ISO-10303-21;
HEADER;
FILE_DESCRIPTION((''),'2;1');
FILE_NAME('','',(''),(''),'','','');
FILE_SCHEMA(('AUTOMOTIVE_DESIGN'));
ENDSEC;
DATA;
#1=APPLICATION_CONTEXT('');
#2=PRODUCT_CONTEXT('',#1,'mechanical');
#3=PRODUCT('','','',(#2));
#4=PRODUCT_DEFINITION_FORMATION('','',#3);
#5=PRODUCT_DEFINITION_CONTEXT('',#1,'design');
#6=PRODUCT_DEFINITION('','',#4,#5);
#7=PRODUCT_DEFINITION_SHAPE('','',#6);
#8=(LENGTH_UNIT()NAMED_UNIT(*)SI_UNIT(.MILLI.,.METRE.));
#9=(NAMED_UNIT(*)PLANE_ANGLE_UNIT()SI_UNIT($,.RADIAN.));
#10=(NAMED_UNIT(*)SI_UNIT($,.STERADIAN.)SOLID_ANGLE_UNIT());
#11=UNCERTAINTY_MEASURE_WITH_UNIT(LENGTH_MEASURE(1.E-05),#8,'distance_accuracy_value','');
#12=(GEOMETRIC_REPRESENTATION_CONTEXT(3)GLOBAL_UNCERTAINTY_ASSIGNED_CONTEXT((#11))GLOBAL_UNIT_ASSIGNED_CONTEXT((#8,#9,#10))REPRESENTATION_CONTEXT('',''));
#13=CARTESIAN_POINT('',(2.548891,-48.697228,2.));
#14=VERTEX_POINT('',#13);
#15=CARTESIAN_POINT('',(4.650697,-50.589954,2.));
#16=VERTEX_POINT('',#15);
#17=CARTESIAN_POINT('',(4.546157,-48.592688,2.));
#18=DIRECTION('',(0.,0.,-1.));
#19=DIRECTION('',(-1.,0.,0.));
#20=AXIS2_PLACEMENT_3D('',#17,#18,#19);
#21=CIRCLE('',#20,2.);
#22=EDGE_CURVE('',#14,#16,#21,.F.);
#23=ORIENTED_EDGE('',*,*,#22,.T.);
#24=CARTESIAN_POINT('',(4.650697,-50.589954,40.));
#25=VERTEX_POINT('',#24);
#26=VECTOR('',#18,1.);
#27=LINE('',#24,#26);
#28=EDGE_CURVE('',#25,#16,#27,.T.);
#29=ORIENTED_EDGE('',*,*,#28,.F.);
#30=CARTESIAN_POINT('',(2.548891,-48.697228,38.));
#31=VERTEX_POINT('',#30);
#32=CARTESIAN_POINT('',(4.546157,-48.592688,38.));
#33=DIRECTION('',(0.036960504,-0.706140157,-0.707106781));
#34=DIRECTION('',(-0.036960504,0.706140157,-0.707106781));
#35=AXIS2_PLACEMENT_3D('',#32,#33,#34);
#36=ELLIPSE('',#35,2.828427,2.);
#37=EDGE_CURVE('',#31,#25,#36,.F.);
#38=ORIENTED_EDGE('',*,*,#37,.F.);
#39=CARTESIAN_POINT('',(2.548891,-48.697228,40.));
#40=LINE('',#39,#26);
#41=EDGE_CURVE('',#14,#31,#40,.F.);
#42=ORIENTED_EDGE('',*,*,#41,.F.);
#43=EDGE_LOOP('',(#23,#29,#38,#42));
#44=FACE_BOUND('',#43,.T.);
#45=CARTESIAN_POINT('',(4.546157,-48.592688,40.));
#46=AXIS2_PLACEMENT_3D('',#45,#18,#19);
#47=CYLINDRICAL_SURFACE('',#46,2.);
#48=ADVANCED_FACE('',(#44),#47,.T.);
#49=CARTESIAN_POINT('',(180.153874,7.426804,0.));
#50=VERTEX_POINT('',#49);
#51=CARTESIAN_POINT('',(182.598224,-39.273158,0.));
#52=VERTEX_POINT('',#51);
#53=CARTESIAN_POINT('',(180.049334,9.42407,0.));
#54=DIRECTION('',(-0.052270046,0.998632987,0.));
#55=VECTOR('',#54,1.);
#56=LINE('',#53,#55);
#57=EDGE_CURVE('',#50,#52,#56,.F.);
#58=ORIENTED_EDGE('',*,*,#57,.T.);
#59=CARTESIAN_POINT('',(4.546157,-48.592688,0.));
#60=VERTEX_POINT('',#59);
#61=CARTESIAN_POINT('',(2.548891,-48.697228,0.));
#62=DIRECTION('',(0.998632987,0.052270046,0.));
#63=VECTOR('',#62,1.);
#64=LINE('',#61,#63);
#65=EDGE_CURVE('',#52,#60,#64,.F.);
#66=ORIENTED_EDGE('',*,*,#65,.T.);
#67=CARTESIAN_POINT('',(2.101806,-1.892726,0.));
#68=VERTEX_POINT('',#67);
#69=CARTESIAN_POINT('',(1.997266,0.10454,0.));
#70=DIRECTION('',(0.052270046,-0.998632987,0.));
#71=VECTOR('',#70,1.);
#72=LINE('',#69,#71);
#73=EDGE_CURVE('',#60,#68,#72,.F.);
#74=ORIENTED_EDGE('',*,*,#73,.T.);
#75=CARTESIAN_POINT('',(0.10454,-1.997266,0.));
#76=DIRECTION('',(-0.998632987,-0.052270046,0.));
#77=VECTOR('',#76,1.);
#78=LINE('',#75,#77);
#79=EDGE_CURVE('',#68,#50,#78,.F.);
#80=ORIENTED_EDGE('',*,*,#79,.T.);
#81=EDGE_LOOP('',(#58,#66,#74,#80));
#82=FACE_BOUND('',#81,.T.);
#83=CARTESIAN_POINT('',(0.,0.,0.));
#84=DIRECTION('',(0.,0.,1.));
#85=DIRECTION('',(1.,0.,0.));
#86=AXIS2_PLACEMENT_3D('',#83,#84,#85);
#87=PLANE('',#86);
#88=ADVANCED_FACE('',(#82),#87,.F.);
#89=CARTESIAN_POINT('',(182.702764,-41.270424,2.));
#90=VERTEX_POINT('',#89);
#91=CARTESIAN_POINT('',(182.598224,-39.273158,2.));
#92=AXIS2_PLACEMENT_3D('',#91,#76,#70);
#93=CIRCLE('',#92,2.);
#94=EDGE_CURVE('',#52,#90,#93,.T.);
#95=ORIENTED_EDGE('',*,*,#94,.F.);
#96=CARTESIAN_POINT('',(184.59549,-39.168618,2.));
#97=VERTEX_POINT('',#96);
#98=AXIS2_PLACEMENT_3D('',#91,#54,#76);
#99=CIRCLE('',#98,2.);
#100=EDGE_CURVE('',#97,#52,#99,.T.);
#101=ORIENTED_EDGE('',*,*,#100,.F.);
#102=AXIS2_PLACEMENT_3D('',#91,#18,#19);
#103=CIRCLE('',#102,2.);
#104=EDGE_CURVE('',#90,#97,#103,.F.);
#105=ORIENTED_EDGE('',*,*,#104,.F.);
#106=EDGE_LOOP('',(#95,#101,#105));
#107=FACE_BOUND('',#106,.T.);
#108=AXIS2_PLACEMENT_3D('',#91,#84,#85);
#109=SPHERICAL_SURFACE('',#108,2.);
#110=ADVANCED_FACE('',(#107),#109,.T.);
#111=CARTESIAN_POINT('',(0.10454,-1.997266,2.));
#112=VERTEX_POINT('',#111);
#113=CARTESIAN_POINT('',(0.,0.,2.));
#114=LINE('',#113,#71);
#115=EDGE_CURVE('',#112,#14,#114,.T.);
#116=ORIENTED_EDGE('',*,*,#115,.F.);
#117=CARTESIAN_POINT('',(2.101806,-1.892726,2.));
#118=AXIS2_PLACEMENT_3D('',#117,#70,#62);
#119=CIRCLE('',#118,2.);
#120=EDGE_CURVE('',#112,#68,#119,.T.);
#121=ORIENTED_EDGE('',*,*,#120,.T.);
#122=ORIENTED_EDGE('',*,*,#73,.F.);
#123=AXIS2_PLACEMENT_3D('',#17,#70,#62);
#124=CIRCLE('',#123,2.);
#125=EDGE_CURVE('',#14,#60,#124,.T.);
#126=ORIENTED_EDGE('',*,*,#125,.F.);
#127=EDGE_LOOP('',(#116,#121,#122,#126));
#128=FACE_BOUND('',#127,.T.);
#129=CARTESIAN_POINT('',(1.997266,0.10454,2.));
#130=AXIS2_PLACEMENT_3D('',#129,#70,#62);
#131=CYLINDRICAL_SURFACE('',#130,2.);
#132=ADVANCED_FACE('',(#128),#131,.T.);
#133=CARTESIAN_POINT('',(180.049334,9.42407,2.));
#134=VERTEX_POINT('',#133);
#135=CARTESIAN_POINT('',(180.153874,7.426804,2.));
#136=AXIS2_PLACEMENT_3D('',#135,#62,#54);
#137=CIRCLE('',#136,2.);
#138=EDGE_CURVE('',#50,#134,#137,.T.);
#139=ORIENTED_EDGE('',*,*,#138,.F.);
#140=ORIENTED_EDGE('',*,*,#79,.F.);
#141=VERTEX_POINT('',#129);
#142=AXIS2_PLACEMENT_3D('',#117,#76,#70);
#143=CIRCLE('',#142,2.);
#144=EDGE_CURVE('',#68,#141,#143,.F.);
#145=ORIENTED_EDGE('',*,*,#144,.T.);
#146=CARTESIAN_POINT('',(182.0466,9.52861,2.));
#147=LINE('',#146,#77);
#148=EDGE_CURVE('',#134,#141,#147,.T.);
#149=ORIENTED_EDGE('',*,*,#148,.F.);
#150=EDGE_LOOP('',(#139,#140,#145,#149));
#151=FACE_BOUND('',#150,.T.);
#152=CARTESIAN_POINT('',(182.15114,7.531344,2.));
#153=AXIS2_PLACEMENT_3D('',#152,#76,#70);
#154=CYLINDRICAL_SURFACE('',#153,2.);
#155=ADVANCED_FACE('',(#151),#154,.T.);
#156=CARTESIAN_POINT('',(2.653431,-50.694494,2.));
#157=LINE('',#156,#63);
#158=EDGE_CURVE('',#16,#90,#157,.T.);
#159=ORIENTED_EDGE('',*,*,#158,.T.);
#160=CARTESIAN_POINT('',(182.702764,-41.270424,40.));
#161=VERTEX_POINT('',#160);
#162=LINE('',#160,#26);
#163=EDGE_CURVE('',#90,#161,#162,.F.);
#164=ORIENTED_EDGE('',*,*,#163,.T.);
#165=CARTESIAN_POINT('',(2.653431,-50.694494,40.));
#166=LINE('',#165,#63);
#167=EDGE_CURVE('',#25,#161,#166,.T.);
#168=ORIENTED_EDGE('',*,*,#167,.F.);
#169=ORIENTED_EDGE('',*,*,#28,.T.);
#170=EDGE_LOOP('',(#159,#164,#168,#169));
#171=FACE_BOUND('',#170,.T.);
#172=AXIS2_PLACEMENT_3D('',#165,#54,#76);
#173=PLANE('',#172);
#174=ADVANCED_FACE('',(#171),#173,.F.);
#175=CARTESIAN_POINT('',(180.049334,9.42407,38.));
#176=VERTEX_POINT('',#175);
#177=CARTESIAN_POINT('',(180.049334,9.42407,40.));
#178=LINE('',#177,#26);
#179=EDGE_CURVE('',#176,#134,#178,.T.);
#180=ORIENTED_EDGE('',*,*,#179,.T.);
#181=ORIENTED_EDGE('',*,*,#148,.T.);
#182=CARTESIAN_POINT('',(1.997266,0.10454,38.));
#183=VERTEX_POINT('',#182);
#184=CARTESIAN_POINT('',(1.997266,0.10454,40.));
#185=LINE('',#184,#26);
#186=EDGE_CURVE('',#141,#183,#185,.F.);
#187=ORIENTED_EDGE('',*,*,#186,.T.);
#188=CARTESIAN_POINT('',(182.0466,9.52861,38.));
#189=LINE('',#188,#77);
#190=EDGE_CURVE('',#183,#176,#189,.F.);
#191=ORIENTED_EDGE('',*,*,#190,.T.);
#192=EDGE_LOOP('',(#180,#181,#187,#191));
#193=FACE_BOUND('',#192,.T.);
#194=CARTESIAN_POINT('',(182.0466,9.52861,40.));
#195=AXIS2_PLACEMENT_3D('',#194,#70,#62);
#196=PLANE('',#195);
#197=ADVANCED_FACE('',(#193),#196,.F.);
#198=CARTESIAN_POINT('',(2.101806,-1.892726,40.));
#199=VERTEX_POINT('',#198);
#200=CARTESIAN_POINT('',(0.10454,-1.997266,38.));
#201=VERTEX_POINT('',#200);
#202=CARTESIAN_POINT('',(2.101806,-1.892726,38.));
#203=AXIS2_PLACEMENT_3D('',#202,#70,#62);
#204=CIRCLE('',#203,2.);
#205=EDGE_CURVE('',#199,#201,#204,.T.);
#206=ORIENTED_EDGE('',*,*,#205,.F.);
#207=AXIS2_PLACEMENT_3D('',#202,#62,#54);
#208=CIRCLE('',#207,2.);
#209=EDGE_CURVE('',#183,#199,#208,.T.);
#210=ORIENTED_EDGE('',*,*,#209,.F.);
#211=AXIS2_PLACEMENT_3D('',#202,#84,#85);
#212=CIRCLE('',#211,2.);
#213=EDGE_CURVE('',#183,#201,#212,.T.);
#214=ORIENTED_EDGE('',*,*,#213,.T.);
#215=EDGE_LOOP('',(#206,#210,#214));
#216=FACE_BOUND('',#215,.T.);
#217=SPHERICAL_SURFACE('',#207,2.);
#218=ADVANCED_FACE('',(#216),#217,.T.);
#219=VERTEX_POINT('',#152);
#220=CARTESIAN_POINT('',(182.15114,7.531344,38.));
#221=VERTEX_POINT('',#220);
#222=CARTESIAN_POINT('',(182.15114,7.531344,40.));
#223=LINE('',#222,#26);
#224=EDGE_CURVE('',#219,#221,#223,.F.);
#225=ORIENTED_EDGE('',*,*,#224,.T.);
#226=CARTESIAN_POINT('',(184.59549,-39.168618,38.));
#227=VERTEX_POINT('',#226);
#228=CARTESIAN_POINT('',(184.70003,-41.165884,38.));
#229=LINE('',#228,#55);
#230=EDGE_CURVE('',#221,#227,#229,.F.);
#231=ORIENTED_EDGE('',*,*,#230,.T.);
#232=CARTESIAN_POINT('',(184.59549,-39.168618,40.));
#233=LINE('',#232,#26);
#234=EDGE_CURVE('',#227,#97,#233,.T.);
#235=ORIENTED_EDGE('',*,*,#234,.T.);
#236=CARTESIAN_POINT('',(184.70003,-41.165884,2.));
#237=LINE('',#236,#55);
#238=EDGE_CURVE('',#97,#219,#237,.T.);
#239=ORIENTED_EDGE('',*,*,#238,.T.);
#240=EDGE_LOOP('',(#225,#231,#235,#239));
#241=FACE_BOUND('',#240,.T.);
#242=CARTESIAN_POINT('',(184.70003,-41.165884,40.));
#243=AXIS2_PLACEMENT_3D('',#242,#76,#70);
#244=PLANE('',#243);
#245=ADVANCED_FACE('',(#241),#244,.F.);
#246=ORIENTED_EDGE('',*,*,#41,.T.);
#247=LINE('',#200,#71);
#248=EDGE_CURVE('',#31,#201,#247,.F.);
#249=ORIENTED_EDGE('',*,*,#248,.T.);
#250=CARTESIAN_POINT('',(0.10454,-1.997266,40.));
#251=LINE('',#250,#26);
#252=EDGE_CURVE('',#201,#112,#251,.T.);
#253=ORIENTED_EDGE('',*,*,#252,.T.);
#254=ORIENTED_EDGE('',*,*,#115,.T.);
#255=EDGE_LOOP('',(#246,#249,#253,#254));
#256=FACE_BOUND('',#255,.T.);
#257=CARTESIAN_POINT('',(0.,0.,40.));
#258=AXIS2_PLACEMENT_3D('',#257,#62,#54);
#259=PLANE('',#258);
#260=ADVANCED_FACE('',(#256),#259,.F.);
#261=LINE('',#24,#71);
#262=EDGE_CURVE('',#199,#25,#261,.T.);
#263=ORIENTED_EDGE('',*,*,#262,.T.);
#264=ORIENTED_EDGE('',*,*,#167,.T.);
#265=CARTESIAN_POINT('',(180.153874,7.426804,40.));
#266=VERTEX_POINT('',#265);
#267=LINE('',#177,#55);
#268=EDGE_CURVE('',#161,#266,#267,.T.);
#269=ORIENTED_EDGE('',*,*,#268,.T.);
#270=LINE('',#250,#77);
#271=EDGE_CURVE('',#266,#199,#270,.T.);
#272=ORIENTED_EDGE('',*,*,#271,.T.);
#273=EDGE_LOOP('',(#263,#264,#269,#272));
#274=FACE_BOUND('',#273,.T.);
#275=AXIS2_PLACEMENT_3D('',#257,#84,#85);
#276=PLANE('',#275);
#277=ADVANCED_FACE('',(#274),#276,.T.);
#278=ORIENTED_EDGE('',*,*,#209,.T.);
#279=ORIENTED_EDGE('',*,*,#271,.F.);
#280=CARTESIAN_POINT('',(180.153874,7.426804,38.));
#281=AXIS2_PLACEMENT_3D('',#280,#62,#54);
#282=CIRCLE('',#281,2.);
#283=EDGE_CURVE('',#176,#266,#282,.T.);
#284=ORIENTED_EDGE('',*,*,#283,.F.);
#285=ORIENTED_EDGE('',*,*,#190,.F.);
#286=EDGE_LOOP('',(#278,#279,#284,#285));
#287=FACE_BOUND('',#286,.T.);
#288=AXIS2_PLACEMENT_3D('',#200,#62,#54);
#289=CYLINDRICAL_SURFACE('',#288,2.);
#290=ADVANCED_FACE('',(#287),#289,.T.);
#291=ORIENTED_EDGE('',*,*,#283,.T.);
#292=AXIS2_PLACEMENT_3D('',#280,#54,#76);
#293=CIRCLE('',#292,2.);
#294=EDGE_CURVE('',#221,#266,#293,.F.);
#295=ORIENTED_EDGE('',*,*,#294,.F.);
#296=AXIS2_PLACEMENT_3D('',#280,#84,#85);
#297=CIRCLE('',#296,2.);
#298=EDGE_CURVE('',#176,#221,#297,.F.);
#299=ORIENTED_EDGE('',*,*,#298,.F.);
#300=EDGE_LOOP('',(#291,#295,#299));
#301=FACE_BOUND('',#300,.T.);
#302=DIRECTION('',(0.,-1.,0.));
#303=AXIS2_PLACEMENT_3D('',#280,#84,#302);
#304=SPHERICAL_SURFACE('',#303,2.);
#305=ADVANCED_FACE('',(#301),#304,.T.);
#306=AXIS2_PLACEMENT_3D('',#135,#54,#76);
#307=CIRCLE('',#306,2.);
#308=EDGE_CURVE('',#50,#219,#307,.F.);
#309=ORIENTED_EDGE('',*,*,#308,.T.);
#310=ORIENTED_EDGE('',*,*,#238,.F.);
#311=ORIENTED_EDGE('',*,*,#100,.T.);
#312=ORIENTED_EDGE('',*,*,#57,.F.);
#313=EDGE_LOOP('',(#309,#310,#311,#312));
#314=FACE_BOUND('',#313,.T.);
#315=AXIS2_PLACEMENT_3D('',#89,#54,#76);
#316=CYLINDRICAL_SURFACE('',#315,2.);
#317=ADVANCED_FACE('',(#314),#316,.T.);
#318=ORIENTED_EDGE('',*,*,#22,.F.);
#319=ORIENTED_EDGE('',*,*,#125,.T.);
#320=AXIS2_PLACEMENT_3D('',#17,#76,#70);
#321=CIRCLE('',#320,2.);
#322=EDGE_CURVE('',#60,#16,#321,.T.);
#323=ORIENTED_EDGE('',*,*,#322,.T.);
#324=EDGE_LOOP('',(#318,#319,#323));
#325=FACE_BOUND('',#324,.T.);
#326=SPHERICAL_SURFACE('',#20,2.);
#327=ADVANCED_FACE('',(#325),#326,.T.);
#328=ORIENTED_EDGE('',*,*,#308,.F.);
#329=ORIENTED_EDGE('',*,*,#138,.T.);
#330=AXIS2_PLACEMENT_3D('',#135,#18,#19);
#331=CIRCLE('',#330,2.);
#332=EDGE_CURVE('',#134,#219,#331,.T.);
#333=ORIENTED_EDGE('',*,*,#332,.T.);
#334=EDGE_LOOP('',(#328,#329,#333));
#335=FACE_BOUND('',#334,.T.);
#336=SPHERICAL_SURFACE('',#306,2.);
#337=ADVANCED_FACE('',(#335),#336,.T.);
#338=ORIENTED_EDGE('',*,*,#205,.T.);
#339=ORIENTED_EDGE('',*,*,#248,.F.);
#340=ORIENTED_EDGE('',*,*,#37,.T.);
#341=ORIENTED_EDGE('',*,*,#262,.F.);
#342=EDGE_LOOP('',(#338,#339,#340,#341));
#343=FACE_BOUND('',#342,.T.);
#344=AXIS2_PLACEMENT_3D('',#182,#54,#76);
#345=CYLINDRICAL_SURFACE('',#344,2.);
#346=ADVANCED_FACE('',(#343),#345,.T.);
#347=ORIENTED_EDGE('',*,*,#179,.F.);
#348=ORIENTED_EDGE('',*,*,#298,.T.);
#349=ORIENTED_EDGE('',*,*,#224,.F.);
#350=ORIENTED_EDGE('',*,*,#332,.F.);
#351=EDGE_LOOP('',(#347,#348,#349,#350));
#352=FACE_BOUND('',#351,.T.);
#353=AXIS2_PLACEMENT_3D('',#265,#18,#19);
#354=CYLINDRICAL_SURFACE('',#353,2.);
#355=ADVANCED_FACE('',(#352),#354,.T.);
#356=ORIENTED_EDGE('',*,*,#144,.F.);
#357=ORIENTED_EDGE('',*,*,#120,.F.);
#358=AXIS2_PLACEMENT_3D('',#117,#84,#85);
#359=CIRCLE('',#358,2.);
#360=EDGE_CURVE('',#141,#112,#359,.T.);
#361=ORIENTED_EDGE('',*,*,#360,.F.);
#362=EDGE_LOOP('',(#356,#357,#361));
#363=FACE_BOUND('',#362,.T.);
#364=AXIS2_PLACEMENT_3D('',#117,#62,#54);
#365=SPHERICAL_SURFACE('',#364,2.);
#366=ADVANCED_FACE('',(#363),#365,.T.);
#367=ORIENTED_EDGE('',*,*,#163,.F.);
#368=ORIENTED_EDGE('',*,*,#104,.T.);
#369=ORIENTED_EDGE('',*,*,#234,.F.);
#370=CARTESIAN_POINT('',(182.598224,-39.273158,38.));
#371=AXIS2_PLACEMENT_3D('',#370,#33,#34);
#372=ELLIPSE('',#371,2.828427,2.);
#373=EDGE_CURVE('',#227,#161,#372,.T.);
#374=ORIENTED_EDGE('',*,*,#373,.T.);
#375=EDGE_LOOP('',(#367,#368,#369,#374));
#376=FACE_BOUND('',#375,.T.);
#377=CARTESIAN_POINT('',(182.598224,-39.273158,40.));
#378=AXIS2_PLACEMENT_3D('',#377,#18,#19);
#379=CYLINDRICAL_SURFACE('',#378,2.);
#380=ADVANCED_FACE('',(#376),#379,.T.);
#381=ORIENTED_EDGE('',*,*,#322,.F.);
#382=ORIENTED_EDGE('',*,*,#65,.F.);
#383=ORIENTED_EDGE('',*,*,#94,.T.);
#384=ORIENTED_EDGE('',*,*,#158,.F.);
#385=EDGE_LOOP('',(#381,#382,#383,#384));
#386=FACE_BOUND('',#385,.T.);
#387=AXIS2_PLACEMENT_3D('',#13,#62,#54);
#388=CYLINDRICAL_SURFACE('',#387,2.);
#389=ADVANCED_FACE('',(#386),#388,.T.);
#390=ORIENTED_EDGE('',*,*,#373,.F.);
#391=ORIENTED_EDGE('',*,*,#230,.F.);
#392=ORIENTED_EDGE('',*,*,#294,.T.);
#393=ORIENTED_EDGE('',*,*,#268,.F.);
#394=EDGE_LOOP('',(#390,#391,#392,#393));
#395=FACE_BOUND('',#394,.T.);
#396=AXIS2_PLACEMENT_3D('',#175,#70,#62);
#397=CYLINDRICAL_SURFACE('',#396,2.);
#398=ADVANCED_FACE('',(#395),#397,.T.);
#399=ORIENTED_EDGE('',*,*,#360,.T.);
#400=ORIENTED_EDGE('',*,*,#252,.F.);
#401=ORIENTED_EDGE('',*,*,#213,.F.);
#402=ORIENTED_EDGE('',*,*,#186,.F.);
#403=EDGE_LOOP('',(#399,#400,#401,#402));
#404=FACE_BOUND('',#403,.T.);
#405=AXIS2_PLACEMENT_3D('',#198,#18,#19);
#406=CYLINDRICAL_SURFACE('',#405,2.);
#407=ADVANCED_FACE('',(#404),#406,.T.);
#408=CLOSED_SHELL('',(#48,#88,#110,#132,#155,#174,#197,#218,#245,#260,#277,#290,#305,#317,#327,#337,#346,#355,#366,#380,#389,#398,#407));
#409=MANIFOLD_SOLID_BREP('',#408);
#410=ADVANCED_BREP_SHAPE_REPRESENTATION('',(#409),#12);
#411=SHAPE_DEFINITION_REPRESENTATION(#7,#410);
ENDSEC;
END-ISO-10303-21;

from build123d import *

# Parameters (mm, degrees)
BOSS_EXTRUDE1_DEPTH = 40
FILLET1_R           = 2
FILLET2_R           = 2


with BuildPart() as part:
    # Sketch1 → Boss-Extrude1 (new body)
    with BuildSketch(Plane.XY):
        Polygon((0, 0), (2.6534308254274332, -50.694494191060826), (184.70003032872677, -41.165884299703535), (182.04659950329932, 9.528609891357288), align=None)
    extrude(amount=BOSS_EXTRUDE1_DEPTH)

    # Fillet1
    fillet1_edges = [part.edges().sort_by_distance(p)[0] for p in [
        (183.37331491601304, -15.818637204173122, 40),
        (91.02329975164966, 4.764304945678644, 40),
        (183.37331491601304, -15.818637204173122, 0),
        (91.02329975164966, 4.764304945678644, 0),
        (182.04659950329932, 9.528609891357288, 20),
        (184.70003032872677, -41.165884299703535, 20),
    ]]
    fillet(fillet1_edges, radius=FILLET1_R)

    # Fillet2
    # the kernel refuses this fillet: 2 mm, written as the material it takes off along each edge
    with BuildSketch(Plane(origin=(182.59822426289585, -39.27315841843169, 2), x_dir=(0.052270046139774824, -0.9986329867756952, 0), z_dir=(0, 0, -1))) as fillet2_piece_1_section:
        Polygon((0, 0), (FILLET2_R, 0), (FILLET2_R, -FILLET2_R), (-6.3e-16, -FILLET2_R), align=None)
    fillet2_piece_1 = extrude(amount=FILLET2_R, mode=Mode.PRIVATE)
    fillet2_piece_1 = fillet2_piece_1 - Plane(origin=(182.59822426289585, -39.27315841843169, 2), x_dir=(-0.7431006609440385, 0.6691796527873013, 0), z_dir=(0, 0, -1)) * Sphere(FILLET2_R, mode=Mode.PRIVATE)
    add(fillet2_piece_1, mode=Mode.SUBTRACT)
    with BuildSketch(Plane(origin=(4.546156706699275, -48.5926881252299, 2), x_dir=(0, 0, -1), z_dir=(-0.9986329867756953, -0.052270046139774824, 0))) as fillet2_piece_2_section:
        Polygon((0, 0), (FILLET2_R, 0), (FILLET2_R, FILLET2_R), (0, FILLET2_R), align=None)
    fillet2_piece_2 = extrude(amount=FILLET2_R, mode=Mode.PRIVATE)
    fillet2_piece_2 = fillet2_piece_2 - Plane(origin=(4.546156706699275, -48.5926881252299, 2), x_dir=(-0.0369605040783685, 0.7061401568656699, 0.7071067811865475), z_dir=(-0.9986329867756953, -0.052270046139774824, 0)) * Sphere(FILLET2_R, mode=Mode.PRIVATE)
    add(fillet2_piece_2, mode=Mode.SUBTRACT)
    with BuildSketch(Plane(origin=(0.1045400922795495, -1.9972659735513878, 0), x_dir=(-5e-17, 0, 1), z_dir=(0.052270046139774824, -0.9986329867756953, 0))) as fillet2_piece_3:
        with BuildLine():
            CenterArc((FILLET2_R, -FILLET2_R), FILLET2_R, 90, 90.00000000000006)
            Line((-3.3e-16, -FILLET2_R), (0, 0))
            Line((0, 0), (FILLET2_R, 0))
        make_face()
    extrude(amount=46.76388909877601, mode=Mode.SUBTRACT)
    with BuildSketch(Plane(origin=(0.1045400922795495, -1.9972659735513878, 40), x_dir=(-5e-17, 0, -1), z_dir=(0.052270046139774824, -0.9986329867756953, 0))) as fillet2_piece_4:
        with BuildLine():
            CenterArc((FILLET2_R, FILLET2_R), FILLET2_R, 179.99999999999994, 90.00000000000006)
            Line((-1.1e-16, FILLET2_R), (0, 0))
            Line((0, 0), (FILLET2_R, 0))
        make_face()
    extrude(amount=53.763889098776026, mode=Mode.SUBTRACT)
    with BuildSketch(Plane(origin=(0, 0, 1.9999999999999996), x_dir=(0.052270046139775025, -0.9986329867756953, 0), z_dir=(0, 0, 1))) as fillet2_piece_5:
        with BuildLine():
            CenterArc((FILLET2_R, FILLET2_R), FILLET2_R, 180.00000000000034, 89.99999999999966)
            Line((9e-16, FILLET2_R), (0, 0))
            Line((0, 0), (FILLET2_R, 0))
        make_face()
    extrude(amount=36, mode=Mode.SUBTRACT)
    with BuildSketch(Plane(origin=(0.1045400922795352, -1.9972659735513885, 38), x_dir=(-0.05227004613977481, 0.9986329867756952, 0), z_dir=(0, 0, -1))) as fillet2_piece_6:
        with BuildLine():
            CenterArc((2 - FILLET2_R, FILLET2_R), FILLET2_R, 270, 89.99999999999885)
            Line((1.9999999999999998, FILLET2_R), (2, 0))
            Line((2, 0), (2 - FILLET2_R, 1.42e-14))
        make_face()
    revolve(axis=Axis((0.1045400922795352, -1.9972659735513885, 38), (0.9986329867756952, 0.05227004613977481, 0)), revolution_arc=90, mode=Mode.SUBTRACT)
    with BuildSketch(Plane(origin=(0.1045400922795352, -1.9972659735513885, 1.9999999999999996), x_dir=(-0.05227004613977481, 0.9986329867756952, 0), z_dir=(1e-17, -1.1e-16, 1))) as fillet2_piece_7:
        with BuildLine():
            CenterArc((2 - FILLET2_R, -FILLET2_R), FILLET2_R, 1.15136e-12, 89.99999999999886)
            Line((1.9999999999999998, -FILLET2_R), (2, 0))
            Line((2, 0), (2 - FILLET2_R, -1.42e-14))
        make_face()
    revolve(axis=Axis((0.1045400922795352, -1.9972659735513885, 1.9999999999999996), (-0.9986329867756952, -0.05227004613977481, 0)), revolution_arc=90, mode=Mode.SUBTRACT)
    with BuildSketch(Plane(origin=(4.650696798978822, -50.58995409878128, 0), x_dir=(-0.05227004613977483, 0.9986329867756953, 0), z_dir=(0.9986329867756952, 0.052270046139774824, 0))) as fillet2_piece_8:
        with BuildLine():
            CenterArc((FILLET2_R, FILLET2_R), FILLET2_R, 180, 90)
            Line((-5e-17, FILLET2_R), (0, 0))
            Line((0, 0), (FILLET2_R, 0))
        make_face()
    extrude(amount=178.29580027300779, mode=Mode.SUBTRACT)
    with BuildSketch(Plane(origin=(2.6534308254274332, -50.694494191060826, 2), x_dir=(-0.05227004613977479, 0.9986329867756952, 0), z_dir=(0, 0, 1))) as fillet2_piece_9:
        with BuildLine():
            CenterArc((FILLET2_R, -FILLET2_R), FILLET2_R, 90, 90)
            Line((-1.444e-14, -FILLET2_R), (0, 0))
            Line((0, 0), (FILLET2_R, 0))
        make_face()
    extrude(amount=43, mode=Mode.SUBTRACT)


solid = part.part
